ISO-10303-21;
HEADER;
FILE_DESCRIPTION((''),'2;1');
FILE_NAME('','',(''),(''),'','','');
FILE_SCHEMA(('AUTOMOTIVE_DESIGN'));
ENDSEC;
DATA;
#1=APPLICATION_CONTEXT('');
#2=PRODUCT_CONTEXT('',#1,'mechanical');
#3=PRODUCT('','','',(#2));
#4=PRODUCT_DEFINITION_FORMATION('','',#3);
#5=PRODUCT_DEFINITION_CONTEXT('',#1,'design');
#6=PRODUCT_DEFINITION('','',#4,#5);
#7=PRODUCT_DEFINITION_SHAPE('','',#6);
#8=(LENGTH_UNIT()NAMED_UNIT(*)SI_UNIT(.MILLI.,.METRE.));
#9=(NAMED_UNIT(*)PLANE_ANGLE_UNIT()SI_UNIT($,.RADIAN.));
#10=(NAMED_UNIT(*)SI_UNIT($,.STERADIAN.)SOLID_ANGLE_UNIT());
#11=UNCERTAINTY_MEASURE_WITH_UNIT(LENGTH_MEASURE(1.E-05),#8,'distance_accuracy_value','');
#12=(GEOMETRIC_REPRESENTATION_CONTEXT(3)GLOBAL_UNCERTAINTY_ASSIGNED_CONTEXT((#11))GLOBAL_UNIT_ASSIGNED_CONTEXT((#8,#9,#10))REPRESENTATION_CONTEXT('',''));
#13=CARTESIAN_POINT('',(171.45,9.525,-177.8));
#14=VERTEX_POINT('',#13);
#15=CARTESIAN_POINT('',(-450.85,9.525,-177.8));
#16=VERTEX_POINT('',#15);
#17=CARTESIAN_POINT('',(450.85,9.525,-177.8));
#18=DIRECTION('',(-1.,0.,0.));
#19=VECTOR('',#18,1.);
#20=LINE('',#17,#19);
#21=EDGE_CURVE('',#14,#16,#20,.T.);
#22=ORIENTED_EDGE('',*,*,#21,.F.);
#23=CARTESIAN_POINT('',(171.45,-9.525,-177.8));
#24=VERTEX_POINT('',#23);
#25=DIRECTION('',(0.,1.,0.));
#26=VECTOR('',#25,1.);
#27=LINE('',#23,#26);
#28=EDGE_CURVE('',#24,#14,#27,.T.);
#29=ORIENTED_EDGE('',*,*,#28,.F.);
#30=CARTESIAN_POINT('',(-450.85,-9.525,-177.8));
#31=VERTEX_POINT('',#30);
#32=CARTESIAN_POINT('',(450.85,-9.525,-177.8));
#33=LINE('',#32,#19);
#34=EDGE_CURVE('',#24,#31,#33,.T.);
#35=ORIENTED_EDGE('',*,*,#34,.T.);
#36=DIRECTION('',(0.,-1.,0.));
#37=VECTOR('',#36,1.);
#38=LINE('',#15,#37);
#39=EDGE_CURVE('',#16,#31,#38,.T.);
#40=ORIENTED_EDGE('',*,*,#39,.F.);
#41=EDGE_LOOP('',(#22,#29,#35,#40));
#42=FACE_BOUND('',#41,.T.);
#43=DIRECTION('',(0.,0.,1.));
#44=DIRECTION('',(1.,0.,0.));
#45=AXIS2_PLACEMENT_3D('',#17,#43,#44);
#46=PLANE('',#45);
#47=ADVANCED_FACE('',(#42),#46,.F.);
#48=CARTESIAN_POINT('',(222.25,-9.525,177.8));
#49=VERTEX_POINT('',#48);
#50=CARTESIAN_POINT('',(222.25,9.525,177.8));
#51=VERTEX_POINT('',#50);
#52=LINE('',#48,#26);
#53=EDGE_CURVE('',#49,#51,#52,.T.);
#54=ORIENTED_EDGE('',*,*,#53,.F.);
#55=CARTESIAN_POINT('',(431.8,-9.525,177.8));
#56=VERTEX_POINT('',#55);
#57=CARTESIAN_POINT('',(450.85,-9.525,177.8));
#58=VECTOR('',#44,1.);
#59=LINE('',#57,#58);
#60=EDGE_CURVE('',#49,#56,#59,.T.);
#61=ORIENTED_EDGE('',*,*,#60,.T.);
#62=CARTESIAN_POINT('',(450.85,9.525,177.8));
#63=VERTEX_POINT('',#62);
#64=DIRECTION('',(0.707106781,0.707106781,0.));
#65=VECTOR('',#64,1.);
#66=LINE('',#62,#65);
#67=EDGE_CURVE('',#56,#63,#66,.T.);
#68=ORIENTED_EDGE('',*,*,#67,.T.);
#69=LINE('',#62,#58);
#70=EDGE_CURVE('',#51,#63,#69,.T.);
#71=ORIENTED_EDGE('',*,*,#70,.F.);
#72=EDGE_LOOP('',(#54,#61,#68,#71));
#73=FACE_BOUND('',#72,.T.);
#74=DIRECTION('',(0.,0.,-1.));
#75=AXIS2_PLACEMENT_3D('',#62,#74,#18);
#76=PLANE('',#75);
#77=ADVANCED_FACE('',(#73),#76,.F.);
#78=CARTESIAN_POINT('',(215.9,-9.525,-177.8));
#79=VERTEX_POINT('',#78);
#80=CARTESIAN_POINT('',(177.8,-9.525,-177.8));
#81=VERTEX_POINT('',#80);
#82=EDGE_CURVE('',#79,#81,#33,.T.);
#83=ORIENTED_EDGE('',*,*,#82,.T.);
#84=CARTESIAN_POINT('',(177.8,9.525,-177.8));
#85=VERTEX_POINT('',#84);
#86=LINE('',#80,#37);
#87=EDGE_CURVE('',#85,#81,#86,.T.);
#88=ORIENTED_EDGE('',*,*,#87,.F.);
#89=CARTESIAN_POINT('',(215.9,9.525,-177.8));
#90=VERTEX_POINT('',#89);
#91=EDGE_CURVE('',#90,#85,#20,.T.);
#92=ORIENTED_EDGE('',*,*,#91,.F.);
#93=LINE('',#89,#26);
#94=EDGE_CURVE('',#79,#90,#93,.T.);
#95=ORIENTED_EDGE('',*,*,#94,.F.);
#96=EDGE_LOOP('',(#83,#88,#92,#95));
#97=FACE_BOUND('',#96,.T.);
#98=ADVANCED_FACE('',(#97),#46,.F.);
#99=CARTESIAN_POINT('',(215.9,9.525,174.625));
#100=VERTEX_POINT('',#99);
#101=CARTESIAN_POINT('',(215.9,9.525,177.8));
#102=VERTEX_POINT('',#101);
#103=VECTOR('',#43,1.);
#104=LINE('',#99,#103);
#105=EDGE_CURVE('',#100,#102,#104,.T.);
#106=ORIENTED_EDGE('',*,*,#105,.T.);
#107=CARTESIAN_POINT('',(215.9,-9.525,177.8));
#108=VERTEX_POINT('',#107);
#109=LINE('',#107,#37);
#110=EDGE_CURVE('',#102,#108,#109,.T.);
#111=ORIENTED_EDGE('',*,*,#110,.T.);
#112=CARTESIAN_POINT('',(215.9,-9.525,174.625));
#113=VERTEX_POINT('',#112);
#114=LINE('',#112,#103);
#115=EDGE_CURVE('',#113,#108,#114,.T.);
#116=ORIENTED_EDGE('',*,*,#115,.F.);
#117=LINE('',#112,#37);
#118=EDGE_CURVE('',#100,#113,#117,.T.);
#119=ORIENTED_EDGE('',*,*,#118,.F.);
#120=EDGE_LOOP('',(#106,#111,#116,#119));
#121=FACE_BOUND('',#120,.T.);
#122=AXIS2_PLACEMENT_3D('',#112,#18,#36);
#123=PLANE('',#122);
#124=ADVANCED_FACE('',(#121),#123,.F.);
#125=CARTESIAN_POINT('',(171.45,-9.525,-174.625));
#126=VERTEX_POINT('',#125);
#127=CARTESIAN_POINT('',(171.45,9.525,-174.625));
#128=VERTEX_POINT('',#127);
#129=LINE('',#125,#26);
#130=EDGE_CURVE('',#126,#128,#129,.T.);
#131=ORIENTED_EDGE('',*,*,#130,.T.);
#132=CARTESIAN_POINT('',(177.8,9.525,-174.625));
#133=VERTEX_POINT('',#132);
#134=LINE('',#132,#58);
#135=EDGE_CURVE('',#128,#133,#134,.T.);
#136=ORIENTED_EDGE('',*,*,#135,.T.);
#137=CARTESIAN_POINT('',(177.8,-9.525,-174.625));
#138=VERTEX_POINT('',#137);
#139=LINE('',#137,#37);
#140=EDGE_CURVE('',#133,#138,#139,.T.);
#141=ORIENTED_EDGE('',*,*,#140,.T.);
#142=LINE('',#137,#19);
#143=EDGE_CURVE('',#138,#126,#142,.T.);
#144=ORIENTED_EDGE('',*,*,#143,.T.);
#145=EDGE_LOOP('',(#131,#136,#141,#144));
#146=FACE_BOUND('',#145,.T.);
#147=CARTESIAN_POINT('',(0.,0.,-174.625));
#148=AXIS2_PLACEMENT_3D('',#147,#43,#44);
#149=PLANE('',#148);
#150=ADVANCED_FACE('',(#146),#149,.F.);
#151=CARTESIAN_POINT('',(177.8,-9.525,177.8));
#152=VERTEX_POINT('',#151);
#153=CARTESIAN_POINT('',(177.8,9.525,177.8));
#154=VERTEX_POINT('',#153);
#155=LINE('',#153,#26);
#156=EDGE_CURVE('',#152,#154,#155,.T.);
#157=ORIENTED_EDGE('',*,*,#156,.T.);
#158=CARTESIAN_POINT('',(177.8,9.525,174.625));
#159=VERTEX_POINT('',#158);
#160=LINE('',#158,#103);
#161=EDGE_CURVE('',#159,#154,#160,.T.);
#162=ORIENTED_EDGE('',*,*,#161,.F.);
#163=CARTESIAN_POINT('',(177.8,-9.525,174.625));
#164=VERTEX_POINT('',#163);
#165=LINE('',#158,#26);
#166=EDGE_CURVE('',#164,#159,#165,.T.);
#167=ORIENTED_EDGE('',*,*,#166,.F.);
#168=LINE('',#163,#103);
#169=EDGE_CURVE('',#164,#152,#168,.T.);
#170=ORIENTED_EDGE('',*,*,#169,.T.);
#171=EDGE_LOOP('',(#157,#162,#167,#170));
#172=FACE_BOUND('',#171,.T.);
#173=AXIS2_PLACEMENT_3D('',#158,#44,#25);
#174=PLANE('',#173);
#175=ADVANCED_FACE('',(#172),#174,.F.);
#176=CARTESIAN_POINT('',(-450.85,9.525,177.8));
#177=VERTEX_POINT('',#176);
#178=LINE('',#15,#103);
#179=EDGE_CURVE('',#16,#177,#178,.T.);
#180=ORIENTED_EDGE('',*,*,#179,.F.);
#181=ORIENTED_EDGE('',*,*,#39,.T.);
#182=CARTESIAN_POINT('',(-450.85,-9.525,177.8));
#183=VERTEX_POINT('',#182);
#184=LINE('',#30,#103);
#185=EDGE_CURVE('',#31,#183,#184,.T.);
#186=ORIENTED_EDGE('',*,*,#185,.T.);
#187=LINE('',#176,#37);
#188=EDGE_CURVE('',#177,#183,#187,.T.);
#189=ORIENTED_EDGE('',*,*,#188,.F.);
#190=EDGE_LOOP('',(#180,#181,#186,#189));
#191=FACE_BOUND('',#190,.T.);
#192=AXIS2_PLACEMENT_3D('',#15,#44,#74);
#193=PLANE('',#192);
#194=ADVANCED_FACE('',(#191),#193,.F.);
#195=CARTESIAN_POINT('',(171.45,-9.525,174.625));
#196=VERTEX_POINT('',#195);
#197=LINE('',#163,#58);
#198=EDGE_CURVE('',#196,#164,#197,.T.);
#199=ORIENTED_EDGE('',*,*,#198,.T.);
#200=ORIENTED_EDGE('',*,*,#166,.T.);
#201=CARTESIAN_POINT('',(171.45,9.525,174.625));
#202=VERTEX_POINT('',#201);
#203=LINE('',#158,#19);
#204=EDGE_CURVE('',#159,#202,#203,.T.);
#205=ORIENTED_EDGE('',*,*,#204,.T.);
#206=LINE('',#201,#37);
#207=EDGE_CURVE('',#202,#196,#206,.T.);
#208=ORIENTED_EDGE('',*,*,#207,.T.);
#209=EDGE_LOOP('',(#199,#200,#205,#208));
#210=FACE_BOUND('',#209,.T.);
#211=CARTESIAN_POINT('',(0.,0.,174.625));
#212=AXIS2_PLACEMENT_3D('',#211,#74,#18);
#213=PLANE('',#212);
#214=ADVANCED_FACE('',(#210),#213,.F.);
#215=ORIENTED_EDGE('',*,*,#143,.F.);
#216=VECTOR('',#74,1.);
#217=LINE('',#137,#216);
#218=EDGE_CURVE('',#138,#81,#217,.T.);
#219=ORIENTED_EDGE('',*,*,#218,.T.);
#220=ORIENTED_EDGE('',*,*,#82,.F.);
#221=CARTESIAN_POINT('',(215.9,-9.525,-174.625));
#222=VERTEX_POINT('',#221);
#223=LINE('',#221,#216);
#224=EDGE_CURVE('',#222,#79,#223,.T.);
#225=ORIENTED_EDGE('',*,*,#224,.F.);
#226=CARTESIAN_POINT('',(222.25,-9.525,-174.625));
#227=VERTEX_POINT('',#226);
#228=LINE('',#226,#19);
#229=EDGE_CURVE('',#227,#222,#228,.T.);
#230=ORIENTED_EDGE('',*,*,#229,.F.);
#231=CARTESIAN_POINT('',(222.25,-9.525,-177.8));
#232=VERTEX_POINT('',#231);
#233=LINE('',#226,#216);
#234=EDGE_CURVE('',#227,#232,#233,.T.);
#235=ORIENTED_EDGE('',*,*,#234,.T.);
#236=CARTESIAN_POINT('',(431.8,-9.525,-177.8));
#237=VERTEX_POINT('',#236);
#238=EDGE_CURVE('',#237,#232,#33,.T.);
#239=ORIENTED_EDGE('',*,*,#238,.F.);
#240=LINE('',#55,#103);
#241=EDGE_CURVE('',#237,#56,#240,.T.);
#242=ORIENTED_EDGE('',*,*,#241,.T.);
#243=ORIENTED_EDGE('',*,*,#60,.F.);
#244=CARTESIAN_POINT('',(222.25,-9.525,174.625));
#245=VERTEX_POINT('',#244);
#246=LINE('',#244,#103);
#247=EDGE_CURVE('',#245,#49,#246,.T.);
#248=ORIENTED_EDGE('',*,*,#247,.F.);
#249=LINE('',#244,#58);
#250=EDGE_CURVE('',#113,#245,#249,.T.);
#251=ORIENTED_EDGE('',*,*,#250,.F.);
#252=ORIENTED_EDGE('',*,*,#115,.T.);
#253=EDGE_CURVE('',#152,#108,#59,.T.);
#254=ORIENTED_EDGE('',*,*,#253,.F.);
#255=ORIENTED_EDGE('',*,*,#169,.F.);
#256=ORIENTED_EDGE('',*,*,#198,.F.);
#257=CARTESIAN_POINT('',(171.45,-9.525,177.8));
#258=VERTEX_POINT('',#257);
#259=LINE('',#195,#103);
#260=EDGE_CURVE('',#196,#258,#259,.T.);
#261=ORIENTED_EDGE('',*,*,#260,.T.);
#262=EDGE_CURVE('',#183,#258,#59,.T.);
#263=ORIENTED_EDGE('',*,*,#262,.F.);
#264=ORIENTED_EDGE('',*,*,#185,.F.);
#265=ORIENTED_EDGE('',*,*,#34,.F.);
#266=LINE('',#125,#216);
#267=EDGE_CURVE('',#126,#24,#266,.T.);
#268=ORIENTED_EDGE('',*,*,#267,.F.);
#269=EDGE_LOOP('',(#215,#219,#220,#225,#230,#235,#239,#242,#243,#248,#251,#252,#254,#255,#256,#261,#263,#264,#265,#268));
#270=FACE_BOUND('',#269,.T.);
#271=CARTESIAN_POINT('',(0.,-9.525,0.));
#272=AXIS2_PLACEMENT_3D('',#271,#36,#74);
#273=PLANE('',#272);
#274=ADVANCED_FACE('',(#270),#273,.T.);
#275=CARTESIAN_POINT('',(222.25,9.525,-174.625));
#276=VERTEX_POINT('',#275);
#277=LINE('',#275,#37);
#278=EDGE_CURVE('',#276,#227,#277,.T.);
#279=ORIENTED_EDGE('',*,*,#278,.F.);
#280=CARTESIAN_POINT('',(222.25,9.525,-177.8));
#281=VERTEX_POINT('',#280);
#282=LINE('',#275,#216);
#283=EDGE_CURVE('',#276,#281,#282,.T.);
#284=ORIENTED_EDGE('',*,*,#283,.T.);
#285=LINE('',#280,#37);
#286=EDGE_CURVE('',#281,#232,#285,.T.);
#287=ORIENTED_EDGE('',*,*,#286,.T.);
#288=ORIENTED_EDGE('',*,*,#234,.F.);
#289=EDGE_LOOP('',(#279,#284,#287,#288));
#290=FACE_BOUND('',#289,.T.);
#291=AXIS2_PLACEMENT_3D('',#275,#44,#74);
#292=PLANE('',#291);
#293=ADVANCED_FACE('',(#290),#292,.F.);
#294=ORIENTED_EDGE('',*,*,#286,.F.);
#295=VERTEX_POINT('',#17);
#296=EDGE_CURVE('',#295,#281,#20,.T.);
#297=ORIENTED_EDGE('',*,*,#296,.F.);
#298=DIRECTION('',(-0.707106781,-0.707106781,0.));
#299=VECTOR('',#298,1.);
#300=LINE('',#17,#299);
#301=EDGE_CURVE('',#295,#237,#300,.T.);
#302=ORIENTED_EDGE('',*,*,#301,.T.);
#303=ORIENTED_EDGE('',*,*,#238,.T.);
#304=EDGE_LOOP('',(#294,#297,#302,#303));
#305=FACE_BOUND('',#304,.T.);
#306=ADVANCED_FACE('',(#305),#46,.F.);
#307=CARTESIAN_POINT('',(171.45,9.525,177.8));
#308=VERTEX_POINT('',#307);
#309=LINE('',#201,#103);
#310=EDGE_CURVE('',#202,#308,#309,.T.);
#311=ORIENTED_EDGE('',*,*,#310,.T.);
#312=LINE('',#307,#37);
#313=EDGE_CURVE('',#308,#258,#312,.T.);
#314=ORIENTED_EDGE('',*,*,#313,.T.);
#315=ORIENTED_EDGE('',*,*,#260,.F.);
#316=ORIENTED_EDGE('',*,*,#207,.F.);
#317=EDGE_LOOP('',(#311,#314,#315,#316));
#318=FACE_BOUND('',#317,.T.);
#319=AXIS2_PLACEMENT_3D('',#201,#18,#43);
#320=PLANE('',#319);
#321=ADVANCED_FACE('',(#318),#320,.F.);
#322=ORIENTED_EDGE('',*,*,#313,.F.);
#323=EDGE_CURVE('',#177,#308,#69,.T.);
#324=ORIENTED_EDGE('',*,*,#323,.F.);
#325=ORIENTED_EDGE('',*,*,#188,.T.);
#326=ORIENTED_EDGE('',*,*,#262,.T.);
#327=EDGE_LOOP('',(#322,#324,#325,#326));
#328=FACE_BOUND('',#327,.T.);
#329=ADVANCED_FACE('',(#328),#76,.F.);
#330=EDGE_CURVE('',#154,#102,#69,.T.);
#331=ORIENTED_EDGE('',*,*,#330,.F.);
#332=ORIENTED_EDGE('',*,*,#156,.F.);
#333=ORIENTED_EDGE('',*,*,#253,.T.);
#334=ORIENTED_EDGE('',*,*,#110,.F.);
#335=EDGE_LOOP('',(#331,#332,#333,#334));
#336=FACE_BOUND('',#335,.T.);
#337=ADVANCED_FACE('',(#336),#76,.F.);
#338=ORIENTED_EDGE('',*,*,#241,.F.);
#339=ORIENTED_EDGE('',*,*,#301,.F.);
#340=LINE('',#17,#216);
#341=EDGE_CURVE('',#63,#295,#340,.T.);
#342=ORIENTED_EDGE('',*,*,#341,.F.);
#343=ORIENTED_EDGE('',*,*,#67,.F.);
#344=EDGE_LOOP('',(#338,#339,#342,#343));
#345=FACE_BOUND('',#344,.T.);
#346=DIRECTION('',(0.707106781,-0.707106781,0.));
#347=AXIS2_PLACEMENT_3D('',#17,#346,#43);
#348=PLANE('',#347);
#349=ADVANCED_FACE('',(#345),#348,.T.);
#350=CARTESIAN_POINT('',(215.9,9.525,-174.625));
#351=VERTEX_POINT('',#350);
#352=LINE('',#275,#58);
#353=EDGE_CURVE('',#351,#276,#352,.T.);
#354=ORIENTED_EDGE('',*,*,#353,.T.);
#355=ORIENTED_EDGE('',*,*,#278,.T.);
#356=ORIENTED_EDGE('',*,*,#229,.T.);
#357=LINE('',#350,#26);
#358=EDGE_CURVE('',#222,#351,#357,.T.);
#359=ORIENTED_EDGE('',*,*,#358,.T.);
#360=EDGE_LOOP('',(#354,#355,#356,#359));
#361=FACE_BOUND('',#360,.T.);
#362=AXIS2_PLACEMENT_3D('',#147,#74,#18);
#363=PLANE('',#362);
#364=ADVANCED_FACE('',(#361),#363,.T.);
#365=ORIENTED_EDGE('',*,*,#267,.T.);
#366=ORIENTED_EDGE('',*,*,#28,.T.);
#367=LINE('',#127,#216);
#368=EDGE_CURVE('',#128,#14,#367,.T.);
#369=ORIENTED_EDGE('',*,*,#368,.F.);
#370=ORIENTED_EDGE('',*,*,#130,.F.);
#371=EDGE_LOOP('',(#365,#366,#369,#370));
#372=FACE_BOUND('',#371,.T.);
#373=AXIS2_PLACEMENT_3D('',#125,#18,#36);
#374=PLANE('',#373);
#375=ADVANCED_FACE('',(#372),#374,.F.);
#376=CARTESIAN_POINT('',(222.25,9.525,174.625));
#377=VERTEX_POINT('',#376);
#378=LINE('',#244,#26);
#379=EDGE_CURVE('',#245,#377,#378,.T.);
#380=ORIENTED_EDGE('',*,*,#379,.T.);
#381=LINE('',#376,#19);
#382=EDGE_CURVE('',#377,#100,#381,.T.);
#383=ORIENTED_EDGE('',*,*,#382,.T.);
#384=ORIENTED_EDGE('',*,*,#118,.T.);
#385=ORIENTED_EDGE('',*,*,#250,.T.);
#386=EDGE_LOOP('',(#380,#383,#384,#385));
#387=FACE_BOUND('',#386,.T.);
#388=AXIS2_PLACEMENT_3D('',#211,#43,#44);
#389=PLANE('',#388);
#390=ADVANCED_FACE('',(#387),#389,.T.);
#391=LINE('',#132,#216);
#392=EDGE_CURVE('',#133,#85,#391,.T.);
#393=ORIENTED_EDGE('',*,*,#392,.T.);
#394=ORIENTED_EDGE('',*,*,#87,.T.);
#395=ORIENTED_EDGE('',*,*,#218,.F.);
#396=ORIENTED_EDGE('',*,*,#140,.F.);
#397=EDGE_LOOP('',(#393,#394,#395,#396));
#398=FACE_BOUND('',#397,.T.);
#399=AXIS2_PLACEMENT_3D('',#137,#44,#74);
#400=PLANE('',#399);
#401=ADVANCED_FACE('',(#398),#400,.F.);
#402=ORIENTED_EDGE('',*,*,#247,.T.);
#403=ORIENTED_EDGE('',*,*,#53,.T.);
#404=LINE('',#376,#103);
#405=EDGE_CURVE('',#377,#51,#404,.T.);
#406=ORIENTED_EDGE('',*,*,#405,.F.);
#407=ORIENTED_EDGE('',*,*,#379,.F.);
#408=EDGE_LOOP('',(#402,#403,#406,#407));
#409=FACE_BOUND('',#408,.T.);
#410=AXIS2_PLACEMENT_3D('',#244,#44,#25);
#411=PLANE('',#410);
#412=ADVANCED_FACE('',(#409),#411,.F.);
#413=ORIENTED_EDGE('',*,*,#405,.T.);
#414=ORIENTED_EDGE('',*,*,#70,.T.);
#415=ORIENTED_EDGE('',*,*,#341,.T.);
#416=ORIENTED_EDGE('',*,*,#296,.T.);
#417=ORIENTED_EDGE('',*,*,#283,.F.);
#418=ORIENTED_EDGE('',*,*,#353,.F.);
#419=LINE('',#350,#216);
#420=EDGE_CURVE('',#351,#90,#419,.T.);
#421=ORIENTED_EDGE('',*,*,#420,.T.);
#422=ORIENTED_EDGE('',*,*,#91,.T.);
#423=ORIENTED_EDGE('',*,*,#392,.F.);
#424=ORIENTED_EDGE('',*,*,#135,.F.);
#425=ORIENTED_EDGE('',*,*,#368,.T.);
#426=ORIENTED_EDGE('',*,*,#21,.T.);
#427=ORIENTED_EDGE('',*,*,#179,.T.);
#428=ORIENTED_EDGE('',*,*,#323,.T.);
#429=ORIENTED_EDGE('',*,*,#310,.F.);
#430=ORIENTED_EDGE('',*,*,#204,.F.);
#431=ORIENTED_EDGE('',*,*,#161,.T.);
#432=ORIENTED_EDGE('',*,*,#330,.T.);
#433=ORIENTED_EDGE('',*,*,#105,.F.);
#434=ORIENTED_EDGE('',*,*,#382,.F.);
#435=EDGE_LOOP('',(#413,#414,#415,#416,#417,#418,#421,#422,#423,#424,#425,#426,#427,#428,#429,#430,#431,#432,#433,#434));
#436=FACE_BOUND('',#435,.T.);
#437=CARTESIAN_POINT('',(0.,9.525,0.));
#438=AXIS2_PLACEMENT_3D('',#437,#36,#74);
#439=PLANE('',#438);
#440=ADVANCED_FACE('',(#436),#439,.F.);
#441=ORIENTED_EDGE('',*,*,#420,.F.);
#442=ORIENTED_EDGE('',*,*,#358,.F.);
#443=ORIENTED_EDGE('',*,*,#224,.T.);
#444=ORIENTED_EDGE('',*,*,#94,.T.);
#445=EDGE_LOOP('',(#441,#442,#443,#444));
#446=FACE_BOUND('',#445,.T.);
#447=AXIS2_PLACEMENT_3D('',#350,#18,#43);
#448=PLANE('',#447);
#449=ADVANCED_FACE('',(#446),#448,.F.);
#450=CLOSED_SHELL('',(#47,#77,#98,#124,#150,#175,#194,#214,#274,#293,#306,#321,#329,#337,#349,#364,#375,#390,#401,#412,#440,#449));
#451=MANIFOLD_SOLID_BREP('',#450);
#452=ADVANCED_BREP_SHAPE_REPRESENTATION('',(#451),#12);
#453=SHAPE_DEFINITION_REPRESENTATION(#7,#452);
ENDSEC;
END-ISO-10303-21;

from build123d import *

# Parameters (mm, degrees)
SKETCH1_W           = 901.7
SKETCH1_H           = 355.6
BOSS_EXTRUDE1_DEPTH = 9.525
CHAMFER1_SIZE       = 19.05
SKETCH2_W           = 6.35
SKETCH2_H           = 19.05
CUT_EXTRUDE1_DEPTH  = 3.175
SKETCH3_W           = 6.35
SKETCH3_H           = 19.05
CUT_EXTRUDE2_DEPTH  = 3.175


with BuildPart() as part:
    # Sketch1 → Boss-Extrude1 (new, symmetric)
    with BuildSketch(Plane(origin=(0, 0, 0), x_dir=(1, 0, 0), z_dir=(0, 1, 0))):
        Rectangle(SKETCH1_W, SKETCH1_H)
    extrude(amount=BOSS_EXTRUDE1_DEPTH, both=True)

    # Chamfer1
    chamfer1_edges = [part.edges().sort_by_distance(p)[0] for p in [
        (450.85, -9.525, 0),
    ]]
    chamfer(chamfer1_edges, length=CHAMFER1_SIZE - 0.0001)  # a hair under: the kernel refuses the full size

    # Sketch2 → Cut-Extrude1 (cut)
    with BuildSketch(Plane.XY.offset(177.8)):
        with Locations((174.625, 0)):
            Rectangle(SKETCH2_W, SKETCH2_H)
        with Locations((219.075, 0)):
            Rectangle(SKETCH2_W, SKETCH2_H)
    extrude(amount=-CUT_EXTRUDE1_DEPTH, mode=Mode.SUBTRACT)

    # Sketch3 → Cut-Extrude2 (cut)
    with BuildSketch(Plane(origin=(0, 0, -177.8), x_dir=(-1, 0, 0), z_dir=(0, 0, -1))):
        with Locations((-174.625, 0)):
            Rectangle(SKETCH3_W, SKETCH3_H)
        with Locations((-219.075, 0)):
            Rectangle(SKETCH3_W, SKETCH3_H)
    extrude(amount=-CUT_EXTRUDE2_DEPTH, mode=Mode.SUBTRACT)


solid = part.part
